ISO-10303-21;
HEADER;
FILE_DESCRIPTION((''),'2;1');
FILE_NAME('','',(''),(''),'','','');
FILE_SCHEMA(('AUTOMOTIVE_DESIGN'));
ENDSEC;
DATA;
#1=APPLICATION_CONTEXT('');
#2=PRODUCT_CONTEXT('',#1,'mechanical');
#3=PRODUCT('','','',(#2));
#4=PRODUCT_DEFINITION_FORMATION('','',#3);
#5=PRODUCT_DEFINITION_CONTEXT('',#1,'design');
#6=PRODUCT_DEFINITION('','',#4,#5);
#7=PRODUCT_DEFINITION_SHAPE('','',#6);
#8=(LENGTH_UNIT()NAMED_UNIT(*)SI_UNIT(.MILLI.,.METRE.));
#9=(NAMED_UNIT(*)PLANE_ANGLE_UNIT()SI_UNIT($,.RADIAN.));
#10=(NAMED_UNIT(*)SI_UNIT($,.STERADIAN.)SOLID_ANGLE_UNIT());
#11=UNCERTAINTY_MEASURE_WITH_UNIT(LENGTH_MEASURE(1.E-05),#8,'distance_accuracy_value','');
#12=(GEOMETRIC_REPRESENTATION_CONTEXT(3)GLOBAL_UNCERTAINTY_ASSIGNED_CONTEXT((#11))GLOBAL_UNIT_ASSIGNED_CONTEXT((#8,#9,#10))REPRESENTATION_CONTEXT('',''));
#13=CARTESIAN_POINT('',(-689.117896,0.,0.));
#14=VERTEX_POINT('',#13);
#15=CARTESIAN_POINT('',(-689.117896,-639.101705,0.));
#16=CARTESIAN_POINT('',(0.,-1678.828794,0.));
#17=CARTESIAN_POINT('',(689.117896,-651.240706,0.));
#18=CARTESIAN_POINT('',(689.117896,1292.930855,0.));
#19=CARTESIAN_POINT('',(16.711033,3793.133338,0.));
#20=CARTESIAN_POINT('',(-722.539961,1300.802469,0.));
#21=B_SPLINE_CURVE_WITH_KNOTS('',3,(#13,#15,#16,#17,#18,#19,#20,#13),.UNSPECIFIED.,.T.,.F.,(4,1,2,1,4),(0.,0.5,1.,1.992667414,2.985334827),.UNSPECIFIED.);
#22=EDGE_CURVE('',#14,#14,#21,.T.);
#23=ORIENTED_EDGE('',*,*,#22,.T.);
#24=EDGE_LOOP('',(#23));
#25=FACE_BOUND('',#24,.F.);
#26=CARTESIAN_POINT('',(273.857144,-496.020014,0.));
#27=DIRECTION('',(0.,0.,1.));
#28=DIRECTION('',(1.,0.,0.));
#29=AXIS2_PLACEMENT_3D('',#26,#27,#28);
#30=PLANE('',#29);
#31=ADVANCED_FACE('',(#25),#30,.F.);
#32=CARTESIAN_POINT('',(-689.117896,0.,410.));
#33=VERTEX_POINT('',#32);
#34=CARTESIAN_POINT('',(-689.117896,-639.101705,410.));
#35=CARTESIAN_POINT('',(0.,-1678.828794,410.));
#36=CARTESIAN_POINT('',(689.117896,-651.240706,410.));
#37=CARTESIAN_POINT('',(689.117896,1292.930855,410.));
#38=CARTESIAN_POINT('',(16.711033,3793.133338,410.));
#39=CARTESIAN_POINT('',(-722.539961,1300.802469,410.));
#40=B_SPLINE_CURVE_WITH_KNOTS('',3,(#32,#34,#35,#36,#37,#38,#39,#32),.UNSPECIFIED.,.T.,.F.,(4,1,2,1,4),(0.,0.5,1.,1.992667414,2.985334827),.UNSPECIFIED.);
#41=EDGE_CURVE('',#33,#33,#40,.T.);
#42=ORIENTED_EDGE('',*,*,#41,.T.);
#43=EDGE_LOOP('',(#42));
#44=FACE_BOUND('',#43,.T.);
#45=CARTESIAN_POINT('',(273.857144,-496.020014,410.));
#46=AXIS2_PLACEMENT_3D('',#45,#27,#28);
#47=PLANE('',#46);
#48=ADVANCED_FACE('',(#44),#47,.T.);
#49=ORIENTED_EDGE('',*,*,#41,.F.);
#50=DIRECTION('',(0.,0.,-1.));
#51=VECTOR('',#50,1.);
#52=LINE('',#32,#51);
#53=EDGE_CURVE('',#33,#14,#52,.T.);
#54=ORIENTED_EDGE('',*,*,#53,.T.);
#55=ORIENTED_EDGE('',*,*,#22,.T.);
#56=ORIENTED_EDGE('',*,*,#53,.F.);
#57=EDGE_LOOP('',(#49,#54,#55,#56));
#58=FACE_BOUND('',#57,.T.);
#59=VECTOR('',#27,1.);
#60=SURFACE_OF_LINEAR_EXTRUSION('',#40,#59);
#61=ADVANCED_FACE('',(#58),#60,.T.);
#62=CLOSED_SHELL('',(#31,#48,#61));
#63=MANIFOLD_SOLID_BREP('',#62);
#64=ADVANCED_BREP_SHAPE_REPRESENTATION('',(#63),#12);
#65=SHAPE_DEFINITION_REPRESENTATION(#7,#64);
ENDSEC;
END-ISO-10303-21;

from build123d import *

# Parameters (mm, degrees)
F4_DEPTH = 410


# Not quite as in the source:
# - the program builds the solid bodies; features that only make, move or delete a surface that nothing else refers to are left out


with BuildPart() as f4:
    # F2 (on plane+point) → F4 (new body)
    with BuildSketch(Plane.XY.offset(410)):
        with BuildLine():
            Line((689.1178958249, 0), (0, 0))
            Line((0, 0), (0, -1162))
            add(Edge.make_bspline(
                [(0, -1162), (344.5589479125, -1165.0347502999), (689.1178958249, -651.2407064438), (689.1178958249, 0)],
                knots=[0.5, 0.5, 0.5, 0.5, 1, 1, 1, 1], degree=3))
        make_face()
        with BuildLine():
            Line((0, 2545), (0, 0))
            Line((0, 0), (689.1178958249, 0))
            add(Edge.make_bspline(
                [(689.1178958249, 0), (689.1178958249, 1292.9308553383), (352.9144642907, 2543.0320965212), (0, 2545)],
                knots=[0, 0, 0, 0, 0.5, 0.5, 0.5, 0.5], degree=3))
        make_face()
        with BuildLine():
            Line((0, -1162), (0, 0))
            Line((0, 0), (-689.1178958249, 0))
            add(Edge.make_bspline(
                [(-689.1178958249, 0), (-689.1178958249, -639.1017052442), (-344.5589479125, -1158.9652497001), (0, -1162)],
                knots=[0, 0, 0, 0, 0.5, 0.5, 0.5, 0.5], degree=3))
        make_face()
        with BuildLine():
            Line((-689.1178958249, 0), (0, 0))
            Line((0, 0), (0, 2545))
            add(Edge.make_bspline(
                [(0, 2545), (-352.9144642907, 2546.9679034788), (-722.539961338, 1300.8024692535), (-689.1178958249, 0)],
                knots=[0.5, 0.5, 0.5, 0.5, 1, 1, 1, 1], degree=3))
        make_face()
    extrude(amount=-F4_DEPTH)


solid = f4.part
